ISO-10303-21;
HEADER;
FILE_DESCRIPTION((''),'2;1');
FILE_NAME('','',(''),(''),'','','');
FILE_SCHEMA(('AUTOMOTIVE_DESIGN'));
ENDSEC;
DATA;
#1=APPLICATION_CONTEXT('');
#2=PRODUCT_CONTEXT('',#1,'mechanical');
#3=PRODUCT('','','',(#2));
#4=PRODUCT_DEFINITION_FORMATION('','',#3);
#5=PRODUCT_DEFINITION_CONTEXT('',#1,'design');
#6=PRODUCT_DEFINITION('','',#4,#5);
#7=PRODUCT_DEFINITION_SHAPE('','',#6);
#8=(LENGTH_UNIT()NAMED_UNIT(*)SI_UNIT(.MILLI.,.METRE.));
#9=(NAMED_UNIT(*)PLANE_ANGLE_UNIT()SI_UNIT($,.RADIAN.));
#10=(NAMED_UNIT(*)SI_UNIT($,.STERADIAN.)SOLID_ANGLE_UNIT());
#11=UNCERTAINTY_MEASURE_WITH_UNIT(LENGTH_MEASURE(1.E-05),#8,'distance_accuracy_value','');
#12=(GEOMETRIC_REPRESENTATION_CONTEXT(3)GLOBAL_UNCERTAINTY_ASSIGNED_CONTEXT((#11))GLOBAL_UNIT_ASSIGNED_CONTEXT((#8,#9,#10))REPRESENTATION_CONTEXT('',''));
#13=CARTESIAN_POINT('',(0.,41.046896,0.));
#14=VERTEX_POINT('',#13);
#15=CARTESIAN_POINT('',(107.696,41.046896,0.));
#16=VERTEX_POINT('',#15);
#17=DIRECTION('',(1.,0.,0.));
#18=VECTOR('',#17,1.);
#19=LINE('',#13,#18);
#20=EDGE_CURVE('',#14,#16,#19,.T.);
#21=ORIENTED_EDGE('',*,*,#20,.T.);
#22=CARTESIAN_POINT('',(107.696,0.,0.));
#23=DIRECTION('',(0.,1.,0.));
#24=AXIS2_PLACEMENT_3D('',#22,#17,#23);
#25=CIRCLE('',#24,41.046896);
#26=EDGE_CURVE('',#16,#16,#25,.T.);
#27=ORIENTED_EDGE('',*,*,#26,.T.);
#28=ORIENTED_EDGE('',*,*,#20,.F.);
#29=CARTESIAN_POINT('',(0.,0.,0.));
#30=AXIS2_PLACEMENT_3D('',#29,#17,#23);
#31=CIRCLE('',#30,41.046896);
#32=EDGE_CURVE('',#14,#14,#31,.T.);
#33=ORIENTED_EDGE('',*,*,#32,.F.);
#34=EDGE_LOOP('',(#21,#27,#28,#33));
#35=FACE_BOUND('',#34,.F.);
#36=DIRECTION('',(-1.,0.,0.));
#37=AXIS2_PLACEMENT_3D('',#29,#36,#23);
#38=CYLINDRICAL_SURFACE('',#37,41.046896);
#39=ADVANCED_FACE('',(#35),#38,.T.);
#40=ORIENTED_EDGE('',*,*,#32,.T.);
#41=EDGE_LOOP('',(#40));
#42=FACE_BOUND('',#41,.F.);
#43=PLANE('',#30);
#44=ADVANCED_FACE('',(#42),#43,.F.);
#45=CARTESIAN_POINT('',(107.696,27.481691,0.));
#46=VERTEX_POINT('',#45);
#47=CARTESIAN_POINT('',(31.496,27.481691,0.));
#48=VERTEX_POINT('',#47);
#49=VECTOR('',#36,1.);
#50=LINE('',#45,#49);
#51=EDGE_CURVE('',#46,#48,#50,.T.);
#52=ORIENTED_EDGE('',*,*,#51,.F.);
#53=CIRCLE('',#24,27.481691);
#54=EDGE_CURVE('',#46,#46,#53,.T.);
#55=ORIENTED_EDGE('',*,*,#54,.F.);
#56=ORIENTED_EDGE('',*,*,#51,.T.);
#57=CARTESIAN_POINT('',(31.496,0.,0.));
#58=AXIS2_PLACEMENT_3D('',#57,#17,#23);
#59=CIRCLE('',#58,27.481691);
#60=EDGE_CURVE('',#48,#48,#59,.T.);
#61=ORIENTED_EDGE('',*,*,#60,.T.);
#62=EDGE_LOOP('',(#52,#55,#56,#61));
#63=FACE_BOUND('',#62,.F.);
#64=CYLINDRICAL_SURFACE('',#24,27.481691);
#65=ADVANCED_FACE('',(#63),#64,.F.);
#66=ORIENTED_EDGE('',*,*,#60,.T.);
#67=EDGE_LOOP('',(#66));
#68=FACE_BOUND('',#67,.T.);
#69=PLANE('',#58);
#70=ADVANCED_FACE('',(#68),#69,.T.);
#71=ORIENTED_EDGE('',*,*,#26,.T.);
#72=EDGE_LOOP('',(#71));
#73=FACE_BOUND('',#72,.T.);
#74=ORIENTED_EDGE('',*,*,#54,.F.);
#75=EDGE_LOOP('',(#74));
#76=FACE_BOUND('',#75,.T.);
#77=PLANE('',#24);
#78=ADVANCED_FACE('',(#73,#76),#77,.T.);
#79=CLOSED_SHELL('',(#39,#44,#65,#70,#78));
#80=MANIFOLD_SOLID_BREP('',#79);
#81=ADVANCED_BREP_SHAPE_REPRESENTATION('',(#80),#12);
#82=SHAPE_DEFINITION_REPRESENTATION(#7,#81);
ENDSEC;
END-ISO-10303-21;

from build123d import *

# Parameters (mm, degrees)
F0_R     = 41.0468963078
F1_DEPTH = 107.696
F5_R     = 27.4816908528
F4_R     = 27.4816908528
F6_DEPTH = 76.2


# Not quite as in the source:
# - a feature of the source that left no trace in its solid (it failed there, or was rolled back) is left out


with BuildPart() as f1:
    # F0 (on Right) → F1 (new body)
    with BuildSketch(Plane.YZ):
        Circle(F0_R)
    extrude(amount=F1_DEPTH)

    # F5 (on face) + F4 (on face) → F6 (cut)
    with BuildSketch(Plane.YZ.offset(107.696)):
        Circle(F5_R)
    with BuildSketch(Plane.YZ.offset(107.696)):
        Circle(F4_R)
    extrude(amount=-F6_DEPTH, mode=Mode.SUBTRACT)


solid = f1.part
